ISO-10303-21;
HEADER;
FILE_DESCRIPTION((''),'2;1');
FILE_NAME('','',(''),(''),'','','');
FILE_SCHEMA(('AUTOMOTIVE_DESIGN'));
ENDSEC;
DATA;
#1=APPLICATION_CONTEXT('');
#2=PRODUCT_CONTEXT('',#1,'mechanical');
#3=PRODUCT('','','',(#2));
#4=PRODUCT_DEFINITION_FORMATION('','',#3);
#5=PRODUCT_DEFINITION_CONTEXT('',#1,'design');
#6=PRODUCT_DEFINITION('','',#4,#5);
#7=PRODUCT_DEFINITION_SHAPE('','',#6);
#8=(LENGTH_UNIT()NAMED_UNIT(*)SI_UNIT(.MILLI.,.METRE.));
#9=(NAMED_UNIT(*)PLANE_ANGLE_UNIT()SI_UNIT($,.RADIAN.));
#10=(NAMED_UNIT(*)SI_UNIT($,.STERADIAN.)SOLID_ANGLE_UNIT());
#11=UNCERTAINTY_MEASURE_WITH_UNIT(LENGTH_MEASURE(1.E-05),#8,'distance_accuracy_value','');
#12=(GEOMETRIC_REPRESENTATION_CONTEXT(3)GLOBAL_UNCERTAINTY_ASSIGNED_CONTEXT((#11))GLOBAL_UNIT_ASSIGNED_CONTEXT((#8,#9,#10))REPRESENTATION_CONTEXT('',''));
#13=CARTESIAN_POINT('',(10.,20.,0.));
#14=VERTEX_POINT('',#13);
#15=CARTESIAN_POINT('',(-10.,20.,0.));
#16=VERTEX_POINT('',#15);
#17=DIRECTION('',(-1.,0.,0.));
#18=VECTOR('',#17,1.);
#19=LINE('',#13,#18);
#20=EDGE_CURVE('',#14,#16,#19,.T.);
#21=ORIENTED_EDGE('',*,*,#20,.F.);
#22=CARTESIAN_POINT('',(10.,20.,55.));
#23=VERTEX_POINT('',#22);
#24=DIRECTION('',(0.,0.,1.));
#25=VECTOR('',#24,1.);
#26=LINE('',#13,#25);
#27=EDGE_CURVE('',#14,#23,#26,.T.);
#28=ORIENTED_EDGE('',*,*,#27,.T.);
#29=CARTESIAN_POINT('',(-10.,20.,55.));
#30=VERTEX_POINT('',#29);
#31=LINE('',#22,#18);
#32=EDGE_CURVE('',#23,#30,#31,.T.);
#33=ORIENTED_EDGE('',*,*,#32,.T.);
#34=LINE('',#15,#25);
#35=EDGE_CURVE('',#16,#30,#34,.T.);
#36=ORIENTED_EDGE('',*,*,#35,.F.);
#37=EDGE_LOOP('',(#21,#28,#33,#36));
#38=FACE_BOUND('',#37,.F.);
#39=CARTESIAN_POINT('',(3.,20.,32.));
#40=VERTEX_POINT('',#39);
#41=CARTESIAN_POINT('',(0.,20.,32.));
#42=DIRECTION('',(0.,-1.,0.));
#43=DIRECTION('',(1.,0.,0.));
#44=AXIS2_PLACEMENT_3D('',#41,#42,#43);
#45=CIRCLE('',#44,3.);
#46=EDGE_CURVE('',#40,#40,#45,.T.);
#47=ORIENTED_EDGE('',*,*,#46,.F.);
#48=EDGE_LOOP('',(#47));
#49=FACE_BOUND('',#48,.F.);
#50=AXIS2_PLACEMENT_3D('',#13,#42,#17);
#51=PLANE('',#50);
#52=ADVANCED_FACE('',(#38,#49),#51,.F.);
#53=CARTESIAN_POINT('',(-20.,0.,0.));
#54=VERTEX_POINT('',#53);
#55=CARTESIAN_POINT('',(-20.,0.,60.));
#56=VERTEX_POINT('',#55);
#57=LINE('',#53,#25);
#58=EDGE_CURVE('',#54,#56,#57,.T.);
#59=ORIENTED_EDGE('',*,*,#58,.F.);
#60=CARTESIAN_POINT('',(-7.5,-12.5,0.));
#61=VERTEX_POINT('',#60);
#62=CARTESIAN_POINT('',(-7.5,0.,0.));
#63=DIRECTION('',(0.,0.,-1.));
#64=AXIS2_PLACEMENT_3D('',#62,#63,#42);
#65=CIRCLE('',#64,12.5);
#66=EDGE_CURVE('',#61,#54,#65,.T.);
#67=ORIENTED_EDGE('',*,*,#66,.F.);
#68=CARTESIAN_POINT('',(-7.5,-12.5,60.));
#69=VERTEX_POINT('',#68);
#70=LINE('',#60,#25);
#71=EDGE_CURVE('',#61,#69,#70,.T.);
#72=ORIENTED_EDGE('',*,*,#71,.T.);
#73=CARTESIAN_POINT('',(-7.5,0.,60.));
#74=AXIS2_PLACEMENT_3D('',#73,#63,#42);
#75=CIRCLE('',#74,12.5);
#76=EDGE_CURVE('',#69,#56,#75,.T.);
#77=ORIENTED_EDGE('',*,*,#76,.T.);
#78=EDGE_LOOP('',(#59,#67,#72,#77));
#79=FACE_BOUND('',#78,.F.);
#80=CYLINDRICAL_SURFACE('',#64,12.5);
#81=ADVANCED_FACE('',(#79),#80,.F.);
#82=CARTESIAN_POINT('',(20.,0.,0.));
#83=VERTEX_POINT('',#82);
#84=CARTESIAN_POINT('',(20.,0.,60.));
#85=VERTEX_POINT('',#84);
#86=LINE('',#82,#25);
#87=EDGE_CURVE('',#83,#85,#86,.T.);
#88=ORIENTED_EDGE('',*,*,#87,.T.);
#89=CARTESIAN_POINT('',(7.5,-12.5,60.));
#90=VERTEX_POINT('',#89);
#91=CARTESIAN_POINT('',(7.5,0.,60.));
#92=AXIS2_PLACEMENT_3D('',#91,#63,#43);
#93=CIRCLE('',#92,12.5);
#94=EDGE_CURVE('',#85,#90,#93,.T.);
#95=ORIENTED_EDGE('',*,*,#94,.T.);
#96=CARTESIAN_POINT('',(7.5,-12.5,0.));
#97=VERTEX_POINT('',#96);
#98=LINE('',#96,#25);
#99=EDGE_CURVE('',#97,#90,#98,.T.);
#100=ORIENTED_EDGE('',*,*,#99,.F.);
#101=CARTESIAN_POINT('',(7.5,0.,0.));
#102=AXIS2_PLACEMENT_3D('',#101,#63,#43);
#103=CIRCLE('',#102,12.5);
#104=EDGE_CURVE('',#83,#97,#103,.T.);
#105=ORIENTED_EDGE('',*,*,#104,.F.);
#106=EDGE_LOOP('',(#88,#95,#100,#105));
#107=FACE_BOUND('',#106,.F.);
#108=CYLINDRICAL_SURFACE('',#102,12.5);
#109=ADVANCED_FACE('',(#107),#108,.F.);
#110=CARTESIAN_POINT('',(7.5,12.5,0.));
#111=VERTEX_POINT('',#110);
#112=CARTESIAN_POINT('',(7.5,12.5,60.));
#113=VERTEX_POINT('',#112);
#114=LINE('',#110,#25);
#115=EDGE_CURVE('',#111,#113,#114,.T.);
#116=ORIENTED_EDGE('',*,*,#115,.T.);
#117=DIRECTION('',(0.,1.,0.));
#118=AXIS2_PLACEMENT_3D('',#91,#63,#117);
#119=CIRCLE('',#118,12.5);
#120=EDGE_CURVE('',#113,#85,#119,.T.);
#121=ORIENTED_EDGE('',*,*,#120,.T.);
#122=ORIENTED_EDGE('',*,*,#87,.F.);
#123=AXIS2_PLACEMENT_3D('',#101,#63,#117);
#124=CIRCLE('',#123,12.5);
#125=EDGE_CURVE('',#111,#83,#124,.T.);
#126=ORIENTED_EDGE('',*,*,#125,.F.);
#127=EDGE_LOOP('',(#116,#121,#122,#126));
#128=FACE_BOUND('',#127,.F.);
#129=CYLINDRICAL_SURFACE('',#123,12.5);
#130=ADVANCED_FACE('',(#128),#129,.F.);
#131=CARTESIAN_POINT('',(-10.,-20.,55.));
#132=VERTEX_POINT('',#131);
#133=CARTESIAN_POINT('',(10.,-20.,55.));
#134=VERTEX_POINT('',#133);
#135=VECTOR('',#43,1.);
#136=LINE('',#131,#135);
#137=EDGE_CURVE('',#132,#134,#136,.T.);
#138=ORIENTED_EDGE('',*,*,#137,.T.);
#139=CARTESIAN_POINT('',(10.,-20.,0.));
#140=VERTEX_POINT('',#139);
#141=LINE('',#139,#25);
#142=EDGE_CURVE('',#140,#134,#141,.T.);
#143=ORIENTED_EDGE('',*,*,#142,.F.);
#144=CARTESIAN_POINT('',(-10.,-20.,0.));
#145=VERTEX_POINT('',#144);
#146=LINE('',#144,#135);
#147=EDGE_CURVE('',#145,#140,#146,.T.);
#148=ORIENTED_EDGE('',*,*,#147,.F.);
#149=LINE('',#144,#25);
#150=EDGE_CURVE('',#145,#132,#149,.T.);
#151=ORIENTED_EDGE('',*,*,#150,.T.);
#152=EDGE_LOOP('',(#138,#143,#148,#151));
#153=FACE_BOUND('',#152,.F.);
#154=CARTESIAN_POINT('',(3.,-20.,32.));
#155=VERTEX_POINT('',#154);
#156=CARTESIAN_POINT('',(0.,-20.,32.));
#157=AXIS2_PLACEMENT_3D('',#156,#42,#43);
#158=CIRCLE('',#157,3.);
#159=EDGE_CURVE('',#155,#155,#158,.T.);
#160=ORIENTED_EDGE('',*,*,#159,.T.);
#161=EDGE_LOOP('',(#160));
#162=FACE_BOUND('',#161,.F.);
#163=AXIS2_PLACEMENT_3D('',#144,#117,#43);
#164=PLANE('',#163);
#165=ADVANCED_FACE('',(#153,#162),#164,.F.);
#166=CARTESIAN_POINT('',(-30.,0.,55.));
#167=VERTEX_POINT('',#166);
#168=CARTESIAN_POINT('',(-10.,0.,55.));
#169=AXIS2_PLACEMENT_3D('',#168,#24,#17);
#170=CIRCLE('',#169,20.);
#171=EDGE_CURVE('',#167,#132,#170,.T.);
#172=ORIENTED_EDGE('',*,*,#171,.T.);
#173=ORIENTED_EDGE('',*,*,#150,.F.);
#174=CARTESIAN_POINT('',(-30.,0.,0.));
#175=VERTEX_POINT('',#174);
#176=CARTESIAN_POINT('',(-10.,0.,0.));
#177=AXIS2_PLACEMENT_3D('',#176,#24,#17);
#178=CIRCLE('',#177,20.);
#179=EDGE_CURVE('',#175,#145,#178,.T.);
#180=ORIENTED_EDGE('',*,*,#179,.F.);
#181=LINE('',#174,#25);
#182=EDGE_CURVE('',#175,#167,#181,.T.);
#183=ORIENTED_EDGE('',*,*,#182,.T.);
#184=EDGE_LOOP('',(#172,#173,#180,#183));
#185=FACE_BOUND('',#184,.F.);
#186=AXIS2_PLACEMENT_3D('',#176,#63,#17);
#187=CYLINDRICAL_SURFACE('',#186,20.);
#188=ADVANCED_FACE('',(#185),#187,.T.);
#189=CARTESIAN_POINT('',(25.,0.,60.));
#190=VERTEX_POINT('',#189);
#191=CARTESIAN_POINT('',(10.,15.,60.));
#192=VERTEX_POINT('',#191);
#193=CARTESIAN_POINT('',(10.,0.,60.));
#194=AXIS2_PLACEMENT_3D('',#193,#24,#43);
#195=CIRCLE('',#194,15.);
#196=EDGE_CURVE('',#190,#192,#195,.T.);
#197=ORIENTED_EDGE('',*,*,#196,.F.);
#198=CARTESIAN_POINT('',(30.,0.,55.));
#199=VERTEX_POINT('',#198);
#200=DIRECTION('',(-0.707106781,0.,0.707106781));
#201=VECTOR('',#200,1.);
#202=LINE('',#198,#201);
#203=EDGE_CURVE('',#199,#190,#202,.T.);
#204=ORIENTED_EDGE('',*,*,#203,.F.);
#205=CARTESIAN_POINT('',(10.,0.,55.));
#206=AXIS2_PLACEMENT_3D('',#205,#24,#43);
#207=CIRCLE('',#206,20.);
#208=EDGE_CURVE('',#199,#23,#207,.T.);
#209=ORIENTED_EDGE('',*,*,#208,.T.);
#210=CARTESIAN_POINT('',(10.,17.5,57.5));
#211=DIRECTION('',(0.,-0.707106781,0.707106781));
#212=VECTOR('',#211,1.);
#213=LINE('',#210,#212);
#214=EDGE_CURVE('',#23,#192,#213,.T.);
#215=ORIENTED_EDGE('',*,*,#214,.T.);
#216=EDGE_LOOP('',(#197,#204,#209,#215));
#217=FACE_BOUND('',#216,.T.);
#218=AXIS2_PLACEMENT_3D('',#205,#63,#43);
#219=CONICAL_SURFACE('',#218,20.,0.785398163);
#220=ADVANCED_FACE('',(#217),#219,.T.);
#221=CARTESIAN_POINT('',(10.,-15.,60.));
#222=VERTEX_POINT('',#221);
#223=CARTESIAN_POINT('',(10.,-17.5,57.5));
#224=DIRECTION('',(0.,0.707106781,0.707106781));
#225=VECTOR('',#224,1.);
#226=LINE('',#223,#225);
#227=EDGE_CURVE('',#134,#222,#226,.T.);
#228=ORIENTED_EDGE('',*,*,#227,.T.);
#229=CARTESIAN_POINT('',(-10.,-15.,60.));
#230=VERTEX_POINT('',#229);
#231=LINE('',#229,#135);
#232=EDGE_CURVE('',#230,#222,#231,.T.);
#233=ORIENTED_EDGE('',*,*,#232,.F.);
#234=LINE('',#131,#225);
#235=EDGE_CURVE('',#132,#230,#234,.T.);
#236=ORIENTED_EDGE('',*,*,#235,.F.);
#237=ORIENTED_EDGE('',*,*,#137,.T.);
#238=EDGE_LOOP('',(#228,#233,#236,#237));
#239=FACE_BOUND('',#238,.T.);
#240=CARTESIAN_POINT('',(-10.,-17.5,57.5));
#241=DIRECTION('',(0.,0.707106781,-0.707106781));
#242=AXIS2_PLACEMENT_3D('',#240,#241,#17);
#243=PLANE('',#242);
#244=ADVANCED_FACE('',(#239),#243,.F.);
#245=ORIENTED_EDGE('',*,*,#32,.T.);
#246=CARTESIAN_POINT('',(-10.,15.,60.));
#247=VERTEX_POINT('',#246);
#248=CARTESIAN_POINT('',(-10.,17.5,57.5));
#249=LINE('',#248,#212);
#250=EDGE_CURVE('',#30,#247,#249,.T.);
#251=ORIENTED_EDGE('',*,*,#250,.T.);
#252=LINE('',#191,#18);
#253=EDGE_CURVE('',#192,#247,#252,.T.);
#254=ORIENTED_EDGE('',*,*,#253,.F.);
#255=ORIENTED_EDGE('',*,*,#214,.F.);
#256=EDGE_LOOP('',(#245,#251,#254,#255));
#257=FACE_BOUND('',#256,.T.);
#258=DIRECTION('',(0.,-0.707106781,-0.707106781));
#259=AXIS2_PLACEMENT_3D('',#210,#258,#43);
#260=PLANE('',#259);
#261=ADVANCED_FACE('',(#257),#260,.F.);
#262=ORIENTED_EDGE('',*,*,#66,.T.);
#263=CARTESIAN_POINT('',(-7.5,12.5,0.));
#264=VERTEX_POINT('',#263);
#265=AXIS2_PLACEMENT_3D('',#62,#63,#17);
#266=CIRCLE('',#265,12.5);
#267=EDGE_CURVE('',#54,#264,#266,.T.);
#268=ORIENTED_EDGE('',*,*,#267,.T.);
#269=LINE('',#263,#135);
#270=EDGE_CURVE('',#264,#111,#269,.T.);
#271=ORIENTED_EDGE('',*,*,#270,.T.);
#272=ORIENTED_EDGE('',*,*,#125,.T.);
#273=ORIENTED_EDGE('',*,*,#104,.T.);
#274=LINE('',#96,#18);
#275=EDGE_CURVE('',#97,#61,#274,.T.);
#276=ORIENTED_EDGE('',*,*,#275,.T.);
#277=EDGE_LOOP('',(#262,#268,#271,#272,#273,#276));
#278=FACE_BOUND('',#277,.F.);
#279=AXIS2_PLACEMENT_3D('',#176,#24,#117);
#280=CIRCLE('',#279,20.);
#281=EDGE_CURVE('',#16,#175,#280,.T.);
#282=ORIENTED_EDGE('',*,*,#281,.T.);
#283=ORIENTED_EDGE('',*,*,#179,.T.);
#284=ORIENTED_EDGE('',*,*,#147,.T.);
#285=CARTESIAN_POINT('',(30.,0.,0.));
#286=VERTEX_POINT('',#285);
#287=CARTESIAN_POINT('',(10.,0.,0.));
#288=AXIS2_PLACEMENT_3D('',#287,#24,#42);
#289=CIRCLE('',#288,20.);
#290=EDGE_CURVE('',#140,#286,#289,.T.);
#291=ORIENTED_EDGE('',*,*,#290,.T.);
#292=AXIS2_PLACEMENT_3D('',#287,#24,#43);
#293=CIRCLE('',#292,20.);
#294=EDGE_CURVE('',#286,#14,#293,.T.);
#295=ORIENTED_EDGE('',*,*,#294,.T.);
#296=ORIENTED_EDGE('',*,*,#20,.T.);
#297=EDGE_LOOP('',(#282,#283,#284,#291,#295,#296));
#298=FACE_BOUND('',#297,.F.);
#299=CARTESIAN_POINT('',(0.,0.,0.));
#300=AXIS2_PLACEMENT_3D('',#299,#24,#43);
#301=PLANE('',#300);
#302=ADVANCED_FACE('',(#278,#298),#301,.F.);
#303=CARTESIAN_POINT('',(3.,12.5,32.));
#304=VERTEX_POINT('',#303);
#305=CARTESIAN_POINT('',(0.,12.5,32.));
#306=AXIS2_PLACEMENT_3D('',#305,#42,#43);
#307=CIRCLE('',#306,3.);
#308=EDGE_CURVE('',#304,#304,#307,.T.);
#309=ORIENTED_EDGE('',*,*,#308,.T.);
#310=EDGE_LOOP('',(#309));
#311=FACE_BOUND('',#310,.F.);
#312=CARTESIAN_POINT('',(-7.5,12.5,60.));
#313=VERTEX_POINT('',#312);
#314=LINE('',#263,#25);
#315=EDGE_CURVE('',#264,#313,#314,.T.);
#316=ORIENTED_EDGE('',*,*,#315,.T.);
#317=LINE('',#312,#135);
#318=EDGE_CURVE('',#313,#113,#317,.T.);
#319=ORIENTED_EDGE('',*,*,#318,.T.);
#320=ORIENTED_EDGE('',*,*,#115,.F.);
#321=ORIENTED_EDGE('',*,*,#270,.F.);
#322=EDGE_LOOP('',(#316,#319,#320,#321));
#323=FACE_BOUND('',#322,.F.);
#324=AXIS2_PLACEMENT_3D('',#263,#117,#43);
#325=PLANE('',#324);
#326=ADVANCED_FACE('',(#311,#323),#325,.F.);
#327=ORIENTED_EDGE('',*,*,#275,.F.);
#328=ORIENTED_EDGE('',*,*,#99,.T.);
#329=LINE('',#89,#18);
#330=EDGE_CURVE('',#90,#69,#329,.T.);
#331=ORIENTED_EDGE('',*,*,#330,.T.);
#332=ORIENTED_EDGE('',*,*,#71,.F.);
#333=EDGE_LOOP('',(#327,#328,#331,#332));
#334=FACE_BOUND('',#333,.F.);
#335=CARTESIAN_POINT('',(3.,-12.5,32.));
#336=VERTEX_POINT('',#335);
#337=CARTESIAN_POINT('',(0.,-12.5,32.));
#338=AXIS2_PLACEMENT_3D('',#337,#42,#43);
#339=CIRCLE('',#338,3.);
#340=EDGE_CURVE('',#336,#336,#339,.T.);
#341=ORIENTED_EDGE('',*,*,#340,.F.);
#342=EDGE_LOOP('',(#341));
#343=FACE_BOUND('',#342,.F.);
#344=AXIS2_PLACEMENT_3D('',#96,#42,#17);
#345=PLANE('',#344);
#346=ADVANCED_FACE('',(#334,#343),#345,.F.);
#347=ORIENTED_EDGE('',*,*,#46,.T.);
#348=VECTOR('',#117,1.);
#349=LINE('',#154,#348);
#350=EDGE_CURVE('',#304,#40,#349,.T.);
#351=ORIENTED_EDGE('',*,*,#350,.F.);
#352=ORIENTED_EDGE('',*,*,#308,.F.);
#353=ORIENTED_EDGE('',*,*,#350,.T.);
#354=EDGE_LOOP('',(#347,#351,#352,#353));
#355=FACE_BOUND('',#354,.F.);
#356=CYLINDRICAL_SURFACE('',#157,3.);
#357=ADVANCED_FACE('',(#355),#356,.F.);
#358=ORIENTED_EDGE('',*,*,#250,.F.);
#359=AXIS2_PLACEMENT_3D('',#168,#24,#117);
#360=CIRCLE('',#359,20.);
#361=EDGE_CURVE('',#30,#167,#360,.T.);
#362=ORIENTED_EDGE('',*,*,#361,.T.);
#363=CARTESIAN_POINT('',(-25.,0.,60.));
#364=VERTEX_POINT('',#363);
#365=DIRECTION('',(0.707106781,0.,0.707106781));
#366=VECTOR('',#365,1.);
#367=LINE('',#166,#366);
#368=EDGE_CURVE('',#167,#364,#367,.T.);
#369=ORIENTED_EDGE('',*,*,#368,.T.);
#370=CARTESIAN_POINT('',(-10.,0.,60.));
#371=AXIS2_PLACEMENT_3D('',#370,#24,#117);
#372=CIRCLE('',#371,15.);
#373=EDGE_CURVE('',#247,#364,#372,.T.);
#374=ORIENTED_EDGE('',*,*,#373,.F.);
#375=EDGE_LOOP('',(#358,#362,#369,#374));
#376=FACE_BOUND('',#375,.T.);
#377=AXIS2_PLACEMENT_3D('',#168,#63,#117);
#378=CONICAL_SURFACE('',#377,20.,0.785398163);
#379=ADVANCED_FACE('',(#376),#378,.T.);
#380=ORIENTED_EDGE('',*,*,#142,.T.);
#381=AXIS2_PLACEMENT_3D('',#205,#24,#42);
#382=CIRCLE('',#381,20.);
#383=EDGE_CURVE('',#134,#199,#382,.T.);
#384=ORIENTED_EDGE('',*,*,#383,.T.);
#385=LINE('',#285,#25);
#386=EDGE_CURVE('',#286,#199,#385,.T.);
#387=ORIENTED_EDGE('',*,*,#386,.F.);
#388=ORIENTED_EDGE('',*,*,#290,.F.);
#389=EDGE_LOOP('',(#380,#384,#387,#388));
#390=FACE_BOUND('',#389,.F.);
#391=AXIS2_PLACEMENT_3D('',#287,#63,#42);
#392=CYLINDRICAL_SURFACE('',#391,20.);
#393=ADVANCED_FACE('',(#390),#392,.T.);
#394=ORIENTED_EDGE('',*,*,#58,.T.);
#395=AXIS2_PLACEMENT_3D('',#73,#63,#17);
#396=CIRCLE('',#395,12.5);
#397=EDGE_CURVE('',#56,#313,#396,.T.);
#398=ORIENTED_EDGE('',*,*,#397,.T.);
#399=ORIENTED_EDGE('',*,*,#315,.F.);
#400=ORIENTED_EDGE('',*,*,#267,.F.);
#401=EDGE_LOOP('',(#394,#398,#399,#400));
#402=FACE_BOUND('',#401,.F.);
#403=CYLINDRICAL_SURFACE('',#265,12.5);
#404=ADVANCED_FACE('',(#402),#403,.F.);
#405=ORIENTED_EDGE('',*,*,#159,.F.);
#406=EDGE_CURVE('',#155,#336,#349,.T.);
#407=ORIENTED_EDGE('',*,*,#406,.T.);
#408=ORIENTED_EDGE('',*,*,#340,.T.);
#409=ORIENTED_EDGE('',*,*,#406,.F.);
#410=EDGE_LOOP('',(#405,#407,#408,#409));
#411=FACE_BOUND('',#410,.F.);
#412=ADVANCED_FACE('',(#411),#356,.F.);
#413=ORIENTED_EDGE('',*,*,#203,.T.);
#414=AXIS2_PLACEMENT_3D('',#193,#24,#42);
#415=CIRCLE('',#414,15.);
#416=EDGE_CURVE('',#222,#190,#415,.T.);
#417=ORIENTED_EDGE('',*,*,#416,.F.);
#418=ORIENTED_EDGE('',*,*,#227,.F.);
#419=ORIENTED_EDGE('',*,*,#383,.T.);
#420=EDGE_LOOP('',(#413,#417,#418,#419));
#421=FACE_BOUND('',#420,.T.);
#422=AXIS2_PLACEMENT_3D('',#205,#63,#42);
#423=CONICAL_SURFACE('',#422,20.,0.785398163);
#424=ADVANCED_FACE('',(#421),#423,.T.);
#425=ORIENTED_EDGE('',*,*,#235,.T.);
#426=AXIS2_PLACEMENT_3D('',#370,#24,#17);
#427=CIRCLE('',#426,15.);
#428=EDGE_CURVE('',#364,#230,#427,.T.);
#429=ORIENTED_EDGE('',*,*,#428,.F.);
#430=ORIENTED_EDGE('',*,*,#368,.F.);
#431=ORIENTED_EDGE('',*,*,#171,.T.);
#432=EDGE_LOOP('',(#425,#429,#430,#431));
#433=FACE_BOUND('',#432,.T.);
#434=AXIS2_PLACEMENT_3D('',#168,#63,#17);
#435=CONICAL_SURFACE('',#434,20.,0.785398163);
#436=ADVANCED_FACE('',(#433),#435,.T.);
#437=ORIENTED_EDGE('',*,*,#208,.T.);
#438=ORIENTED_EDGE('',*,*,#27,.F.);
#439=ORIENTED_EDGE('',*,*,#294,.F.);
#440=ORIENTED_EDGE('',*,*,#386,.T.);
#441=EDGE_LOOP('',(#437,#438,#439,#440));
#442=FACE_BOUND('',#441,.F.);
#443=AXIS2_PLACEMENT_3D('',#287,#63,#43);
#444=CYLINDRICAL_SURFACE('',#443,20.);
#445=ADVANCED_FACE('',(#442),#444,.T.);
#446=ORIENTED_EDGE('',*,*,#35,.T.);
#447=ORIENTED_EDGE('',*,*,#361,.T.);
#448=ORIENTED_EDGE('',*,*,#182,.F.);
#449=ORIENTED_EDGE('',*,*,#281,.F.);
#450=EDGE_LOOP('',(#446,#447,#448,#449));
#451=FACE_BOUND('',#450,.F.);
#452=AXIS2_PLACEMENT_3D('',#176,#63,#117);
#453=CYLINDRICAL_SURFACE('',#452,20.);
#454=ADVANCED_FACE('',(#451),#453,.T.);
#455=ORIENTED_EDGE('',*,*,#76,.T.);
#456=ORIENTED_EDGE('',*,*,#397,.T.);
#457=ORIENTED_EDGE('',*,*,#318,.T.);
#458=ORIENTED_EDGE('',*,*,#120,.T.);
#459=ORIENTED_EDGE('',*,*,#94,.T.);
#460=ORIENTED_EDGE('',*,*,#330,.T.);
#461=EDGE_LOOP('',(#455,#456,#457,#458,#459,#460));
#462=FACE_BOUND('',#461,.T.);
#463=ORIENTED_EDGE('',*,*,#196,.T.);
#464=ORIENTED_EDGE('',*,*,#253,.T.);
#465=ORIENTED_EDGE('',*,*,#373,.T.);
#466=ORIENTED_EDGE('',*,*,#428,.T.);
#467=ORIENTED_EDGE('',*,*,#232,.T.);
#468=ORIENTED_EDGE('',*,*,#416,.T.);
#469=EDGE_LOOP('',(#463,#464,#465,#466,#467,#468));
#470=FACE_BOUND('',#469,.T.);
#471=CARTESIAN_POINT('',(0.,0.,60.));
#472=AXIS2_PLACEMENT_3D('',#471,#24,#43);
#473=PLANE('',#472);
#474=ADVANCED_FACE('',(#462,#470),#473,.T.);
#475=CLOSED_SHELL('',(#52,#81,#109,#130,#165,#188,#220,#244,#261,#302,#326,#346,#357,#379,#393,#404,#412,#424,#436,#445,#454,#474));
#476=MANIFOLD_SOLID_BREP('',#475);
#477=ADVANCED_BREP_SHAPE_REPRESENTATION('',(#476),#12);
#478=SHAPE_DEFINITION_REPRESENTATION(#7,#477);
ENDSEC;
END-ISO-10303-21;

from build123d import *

# Parameters (mm, degrees)
F1_DEPTH = 60
F2_SIZE  = 5
F3_R     = 3
F4_DEPTH = 40.001


with BuildPart() as f1:
    # F0 (on Top) → F1 (new body)
    with BuildSketch(Plane.XY):
        with BuildLine():
            ThreePointArc((30, 0), (24.1421356237, 14.1421356237), (10, 20))
            Line((10, 20), (-10, 20))
            ThreePointArc((-10, 20), (-24.1421356237, 14.1421356237), (-30, 0))
            ThreePointArc((-30, 0), (-24.1421356237, -14.1421356237), (-10, -20))
            Line((-10, -20), (10, -20))
            ThreePointArc((10, -20), (24.1421356237, -14.1421356237), (30, 0))
        make_face()
        with BuildLine():
            Line((-7.5, 12.5), (7.5, 12.5))
            ThreePointArc((7.5, 12.5), (16.3388347648, 8.8388347648), (20, 0))
            ThreePointArc((20, 0), (16.3388347648, -8.8388347648), (7.5, -12.5))
            Line((7.5, -12.5), (-7.5, -12.5))
            ThreePointArc((-7.5, -12.5), (-16.3388347648, -8.8388347648), (-20, 0))
            ThreePointArc((-20, 0), (-16.3388347648, 8.8388347648), (-7.5, 12.5))
        make_face(mode=Mode.SUBTRACT)
    extrude(amount=F1_DEPTH)

    # F2
    f2_edges = [f1.edges().sort_by_distance(p)[0] for p in [
        (30, 0, 60),
        (0, 20, 60),
        (-30, 0, 60),
        (0, -20, 60),
    ]]
    chamfer(f2_edges, length=F2_SIZE)

    # F3 (on face) → F4 (cut, through all)
    with BuildSketch(Plane.XZ.offset(20)):
        with Locations((0, 32)):
            Circle(F3_R)
    extrude(amount=-F4_DEPTH, mode=Mode.SUBTRACT)


solid = f1.part
